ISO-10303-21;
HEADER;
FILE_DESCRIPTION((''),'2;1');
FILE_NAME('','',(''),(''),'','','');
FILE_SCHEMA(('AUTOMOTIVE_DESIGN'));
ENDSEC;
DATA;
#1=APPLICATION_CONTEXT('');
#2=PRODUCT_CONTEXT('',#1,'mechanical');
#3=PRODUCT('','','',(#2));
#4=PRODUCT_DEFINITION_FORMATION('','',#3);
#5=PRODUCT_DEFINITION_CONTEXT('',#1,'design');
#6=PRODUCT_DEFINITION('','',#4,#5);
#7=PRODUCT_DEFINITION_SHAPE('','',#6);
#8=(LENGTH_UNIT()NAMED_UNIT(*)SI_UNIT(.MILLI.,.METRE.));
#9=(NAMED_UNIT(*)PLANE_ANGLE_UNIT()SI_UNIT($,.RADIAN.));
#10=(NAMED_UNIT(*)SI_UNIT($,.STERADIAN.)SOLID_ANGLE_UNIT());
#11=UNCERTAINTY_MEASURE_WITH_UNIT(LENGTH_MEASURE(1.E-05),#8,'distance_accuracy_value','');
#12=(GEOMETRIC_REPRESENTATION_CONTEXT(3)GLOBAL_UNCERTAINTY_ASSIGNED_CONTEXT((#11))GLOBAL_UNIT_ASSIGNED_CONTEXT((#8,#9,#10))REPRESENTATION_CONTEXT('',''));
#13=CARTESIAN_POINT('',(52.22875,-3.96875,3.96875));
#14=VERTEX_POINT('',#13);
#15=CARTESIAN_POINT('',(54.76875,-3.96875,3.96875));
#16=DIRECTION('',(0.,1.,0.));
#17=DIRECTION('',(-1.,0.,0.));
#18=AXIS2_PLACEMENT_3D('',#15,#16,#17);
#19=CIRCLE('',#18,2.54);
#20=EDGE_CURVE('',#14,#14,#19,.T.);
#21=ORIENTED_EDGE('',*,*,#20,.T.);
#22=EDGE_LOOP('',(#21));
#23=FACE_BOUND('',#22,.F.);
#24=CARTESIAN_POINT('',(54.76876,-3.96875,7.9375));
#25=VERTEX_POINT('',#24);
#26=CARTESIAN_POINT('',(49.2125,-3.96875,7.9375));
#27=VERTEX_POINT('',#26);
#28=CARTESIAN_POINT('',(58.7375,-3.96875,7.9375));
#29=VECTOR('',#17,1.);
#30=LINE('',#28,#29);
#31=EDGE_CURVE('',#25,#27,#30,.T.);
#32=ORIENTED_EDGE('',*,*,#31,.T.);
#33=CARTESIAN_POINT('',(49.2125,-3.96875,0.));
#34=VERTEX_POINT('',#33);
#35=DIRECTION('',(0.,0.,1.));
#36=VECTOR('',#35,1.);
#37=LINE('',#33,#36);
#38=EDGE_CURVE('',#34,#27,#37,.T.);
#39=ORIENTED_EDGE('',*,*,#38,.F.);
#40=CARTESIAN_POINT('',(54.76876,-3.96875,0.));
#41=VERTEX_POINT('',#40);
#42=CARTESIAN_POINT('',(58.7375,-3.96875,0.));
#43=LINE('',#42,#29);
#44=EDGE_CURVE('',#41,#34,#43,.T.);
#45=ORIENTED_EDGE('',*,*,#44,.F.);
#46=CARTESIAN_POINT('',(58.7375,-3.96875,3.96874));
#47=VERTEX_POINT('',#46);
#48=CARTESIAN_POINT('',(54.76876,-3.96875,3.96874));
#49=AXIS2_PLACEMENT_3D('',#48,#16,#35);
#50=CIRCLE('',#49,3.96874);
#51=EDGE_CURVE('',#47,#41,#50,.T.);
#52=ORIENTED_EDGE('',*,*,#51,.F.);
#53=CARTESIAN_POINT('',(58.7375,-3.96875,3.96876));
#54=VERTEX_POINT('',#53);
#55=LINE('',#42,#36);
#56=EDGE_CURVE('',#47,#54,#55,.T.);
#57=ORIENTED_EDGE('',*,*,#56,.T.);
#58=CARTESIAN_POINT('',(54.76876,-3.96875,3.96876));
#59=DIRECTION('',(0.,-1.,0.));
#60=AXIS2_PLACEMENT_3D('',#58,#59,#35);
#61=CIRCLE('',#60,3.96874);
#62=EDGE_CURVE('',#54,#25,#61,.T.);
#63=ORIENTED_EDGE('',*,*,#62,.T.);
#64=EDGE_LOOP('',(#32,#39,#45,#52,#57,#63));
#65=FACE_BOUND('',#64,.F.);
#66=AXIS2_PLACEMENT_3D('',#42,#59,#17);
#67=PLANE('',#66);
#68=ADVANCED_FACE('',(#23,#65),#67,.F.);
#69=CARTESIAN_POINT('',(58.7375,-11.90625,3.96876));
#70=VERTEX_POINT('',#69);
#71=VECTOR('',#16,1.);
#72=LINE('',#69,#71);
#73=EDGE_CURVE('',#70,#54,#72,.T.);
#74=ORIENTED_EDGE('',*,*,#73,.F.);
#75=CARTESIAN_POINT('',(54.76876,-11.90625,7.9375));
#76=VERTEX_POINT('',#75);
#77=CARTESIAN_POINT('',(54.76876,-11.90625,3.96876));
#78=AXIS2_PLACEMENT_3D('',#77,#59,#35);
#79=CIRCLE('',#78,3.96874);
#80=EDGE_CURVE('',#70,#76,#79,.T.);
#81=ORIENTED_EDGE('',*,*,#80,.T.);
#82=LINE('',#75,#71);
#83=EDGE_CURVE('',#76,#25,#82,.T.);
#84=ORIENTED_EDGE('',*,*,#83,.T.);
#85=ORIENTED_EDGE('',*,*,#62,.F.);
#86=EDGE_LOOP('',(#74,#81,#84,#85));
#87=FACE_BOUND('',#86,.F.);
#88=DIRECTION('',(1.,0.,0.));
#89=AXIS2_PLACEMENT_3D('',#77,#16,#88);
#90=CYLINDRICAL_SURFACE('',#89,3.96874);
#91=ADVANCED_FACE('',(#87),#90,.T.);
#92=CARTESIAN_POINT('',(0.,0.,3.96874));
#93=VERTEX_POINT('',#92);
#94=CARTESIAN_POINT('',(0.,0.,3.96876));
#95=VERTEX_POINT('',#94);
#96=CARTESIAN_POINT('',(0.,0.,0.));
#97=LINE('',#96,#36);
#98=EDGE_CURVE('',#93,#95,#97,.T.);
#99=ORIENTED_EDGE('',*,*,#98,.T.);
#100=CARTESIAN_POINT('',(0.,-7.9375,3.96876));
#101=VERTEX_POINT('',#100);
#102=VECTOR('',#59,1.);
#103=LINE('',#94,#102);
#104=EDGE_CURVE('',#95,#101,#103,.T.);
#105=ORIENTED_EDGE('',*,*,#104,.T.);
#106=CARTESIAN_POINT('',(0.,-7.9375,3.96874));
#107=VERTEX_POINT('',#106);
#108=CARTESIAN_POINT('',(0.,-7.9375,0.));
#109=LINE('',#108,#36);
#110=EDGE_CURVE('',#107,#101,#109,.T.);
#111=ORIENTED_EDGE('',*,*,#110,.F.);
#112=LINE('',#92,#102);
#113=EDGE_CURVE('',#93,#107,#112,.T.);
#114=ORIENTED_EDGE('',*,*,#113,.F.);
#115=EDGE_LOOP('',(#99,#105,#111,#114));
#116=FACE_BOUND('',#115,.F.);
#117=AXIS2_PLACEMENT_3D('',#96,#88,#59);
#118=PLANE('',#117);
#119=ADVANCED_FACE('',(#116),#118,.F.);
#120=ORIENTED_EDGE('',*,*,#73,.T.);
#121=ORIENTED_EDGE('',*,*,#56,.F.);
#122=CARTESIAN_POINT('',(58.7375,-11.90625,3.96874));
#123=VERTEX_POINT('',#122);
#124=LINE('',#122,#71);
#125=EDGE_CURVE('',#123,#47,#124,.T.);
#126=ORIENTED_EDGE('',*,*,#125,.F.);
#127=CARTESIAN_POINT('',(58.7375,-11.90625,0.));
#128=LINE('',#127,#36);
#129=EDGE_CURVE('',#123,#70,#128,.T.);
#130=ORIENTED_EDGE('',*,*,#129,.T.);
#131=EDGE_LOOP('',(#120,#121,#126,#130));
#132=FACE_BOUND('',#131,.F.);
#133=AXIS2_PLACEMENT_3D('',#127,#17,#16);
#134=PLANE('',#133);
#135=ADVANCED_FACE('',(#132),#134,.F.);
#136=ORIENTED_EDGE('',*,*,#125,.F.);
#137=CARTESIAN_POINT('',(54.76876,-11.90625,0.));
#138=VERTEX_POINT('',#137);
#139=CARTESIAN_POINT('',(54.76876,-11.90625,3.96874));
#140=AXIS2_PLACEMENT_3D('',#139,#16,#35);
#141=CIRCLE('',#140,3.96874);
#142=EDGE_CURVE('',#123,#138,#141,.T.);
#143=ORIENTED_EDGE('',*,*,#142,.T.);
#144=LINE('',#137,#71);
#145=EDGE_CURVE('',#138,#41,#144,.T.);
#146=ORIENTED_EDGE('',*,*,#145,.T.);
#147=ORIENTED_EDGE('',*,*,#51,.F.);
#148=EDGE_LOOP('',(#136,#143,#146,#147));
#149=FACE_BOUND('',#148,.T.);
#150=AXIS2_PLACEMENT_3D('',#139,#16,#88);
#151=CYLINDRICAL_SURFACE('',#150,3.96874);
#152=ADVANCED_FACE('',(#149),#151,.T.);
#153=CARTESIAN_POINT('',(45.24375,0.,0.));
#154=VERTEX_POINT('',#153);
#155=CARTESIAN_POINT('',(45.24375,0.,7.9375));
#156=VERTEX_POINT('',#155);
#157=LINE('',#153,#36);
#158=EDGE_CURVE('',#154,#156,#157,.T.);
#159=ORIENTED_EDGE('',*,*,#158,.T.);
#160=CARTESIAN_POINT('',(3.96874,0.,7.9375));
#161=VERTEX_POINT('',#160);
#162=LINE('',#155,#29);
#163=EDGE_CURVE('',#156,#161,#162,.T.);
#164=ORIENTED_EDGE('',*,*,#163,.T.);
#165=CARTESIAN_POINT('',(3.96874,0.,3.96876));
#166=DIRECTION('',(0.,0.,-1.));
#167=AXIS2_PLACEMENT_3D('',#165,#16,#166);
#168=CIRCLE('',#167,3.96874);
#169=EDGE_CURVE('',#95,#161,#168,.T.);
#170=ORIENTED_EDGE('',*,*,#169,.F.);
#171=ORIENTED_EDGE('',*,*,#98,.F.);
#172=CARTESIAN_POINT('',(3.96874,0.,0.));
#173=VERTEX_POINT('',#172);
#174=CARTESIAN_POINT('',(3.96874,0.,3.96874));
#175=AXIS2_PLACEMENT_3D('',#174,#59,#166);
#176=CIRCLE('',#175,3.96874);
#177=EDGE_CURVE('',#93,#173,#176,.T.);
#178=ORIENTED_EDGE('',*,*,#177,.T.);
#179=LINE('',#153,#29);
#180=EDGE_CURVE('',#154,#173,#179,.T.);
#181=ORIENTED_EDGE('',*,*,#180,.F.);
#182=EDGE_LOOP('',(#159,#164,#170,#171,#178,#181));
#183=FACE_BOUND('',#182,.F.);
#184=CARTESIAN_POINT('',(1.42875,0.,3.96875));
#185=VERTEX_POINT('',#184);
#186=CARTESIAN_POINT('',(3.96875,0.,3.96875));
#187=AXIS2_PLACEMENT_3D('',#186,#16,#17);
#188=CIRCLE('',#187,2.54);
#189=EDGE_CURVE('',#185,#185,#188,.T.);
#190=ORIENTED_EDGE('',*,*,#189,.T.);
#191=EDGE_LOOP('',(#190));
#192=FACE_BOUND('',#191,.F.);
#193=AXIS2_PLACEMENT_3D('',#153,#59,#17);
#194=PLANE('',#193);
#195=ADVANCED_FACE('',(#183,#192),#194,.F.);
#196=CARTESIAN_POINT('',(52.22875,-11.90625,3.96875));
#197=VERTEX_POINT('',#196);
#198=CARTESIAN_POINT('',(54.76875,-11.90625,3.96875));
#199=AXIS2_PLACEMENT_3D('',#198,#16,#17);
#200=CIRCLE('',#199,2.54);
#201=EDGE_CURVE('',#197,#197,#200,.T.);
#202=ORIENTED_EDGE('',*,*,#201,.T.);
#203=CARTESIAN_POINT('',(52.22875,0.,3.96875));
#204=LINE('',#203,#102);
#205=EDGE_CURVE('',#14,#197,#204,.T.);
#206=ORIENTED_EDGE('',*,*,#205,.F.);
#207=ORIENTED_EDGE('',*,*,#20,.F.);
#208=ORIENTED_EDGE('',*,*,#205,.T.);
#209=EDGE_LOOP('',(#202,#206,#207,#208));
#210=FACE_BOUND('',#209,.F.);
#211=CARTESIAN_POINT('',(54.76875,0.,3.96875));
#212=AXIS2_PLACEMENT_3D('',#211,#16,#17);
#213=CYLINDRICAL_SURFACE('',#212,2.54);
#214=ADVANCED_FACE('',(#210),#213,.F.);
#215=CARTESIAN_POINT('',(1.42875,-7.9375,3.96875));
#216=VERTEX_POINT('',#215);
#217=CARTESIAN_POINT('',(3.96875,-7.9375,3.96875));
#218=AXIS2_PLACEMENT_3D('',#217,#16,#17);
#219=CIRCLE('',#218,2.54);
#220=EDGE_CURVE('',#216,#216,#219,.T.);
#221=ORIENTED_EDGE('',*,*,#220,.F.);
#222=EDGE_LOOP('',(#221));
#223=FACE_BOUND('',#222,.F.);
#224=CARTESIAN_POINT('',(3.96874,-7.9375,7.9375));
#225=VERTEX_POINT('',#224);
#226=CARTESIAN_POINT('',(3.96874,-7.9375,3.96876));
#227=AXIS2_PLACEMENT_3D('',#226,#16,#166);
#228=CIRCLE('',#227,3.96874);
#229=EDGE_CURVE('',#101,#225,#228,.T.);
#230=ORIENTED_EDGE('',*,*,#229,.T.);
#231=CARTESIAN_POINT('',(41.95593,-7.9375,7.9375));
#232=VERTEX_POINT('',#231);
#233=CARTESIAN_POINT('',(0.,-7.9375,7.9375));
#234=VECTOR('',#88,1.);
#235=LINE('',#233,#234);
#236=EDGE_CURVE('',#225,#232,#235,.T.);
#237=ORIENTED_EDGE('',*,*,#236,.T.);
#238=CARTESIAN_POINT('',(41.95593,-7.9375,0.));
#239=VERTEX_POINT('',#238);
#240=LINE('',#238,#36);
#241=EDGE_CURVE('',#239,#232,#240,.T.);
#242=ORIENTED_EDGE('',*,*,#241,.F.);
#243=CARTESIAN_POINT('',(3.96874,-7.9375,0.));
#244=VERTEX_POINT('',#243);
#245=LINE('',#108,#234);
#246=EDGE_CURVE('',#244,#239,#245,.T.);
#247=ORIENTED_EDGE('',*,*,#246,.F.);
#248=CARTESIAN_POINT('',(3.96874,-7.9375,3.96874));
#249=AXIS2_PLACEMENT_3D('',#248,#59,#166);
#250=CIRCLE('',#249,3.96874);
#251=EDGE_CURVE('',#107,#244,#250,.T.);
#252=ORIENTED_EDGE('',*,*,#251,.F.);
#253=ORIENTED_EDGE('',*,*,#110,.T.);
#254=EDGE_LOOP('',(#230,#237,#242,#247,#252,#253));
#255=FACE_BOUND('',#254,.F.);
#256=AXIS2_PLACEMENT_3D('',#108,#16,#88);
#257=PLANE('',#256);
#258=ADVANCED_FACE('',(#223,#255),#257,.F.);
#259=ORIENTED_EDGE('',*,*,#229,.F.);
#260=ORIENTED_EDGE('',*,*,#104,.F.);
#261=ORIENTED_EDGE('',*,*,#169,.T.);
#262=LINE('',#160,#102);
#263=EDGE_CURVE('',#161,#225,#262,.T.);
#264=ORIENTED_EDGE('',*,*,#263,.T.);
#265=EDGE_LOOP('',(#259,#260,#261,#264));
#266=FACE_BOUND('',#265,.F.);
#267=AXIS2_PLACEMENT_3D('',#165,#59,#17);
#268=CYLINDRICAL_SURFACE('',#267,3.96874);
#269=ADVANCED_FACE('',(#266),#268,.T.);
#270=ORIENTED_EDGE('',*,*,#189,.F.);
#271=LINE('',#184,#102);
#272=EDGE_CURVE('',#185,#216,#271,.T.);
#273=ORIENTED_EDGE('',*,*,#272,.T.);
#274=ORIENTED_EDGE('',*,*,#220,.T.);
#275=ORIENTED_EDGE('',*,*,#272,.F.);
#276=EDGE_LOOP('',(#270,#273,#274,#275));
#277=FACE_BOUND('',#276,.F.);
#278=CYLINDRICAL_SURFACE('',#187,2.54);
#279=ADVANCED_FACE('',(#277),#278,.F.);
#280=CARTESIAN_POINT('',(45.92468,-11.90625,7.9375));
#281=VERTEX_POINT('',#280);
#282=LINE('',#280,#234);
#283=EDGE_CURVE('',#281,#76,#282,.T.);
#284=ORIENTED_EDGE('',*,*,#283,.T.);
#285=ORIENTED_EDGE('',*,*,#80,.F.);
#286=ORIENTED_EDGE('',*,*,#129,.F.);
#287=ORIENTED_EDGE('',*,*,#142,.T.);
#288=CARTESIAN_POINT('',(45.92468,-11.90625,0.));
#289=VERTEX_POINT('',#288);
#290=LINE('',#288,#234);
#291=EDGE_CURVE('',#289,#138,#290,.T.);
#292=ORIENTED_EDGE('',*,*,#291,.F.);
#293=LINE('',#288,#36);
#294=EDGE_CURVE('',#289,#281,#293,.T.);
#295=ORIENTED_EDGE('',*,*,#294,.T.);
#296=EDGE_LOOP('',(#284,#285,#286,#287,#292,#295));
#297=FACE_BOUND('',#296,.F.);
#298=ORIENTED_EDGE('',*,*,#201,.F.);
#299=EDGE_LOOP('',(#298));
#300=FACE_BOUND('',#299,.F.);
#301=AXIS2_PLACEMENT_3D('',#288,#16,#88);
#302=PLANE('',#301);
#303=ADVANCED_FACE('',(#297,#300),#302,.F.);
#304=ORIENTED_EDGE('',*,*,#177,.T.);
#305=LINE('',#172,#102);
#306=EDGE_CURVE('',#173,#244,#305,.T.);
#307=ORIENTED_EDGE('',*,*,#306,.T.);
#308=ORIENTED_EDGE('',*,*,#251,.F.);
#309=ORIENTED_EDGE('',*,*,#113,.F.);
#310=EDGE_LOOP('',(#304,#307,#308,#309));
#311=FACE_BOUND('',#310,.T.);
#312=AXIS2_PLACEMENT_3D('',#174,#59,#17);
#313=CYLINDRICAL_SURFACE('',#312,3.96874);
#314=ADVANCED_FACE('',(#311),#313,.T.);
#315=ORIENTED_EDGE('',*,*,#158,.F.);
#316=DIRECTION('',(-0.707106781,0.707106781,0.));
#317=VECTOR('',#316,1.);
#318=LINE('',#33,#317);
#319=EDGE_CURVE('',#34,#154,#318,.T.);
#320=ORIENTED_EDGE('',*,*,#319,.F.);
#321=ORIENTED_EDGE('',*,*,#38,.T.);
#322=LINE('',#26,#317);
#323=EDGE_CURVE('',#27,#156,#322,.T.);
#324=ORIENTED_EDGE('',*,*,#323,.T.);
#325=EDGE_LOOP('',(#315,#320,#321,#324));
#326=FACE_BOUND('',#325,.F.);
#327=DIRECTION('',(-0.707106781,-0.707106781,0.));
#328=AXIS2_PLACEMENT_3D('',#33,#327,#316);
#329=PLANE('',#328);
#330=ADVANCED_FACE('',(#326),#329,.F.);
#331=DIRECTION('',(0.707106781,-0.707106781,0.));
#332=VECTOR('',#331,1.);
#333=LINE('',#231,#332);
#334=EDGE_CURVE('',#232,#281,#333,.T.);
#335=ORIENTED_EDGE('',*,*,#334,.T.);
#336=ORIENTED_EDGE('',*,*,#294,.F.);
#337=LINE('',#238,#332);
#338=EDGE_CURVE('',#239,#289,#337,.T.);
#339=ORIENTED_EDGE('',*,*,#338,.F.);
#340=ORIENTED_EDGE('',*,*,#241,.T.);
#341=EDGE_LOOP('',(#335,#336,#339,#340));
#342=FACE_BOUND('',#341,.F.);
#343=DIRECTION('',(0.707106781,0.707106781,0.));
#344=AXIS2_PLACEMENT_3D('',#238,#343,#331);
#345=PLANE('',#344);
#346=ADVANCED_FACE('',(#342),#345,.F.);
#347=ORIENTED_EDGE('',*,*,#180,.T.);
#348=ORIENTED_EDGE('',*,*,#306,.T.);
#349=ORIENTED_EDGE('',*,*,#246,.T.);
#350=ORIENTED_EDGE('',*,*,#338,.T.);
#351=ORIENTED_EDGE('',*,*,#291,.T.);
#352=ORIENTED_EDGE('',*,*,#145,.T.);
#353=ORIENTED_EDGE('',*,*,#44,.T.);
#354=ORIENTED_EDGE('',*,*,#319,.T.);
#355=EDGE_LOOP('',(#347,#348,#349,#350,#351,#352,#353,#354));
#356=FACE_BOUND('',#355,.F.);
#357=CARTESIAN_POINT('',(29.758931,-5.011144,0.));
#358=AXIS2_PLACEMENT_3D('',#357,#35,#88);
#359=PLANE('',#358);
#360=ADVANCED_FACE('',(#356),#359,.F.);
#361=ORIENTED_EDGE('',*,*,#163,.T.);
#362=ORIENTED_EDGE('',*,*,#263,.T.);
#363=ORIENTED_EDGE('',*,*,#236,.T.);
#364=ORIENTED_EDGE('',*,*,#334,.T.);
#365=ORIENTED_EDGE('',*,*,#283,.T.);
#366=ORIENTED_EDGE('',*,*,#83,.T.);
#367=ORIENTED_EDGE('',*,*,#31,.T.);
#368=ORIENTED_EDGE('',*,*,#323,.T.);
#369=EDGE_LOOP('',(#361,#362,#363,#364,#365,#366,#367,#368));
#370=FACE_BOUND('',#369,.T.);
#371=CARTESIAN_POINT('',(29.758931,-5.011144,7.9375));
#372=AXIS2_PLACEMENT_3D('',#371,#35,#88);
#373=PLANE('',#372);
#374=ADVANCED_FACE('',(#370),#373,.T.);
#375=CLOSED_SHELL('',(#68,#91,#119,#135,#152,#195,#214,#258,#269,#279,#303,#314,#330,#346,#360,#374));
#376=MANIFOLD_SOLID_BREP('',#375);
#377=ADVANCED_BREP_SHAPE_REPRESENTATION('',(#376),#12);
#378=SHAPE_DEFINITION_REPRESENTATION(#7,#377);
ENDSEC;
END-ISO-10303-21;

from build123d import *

# Parameters (mm, degrees)
F1_DEPTH = 7.9375
F2_R     = 3.96874
F3_R     = 2.54
F4_DEPTH = 11.90625


# Not quite as in the source:
# - a fillet or chamfer is up to 0.001 mm smaller than in the source, because OpenCascade refuses the exact size


with BuildPart() as f1:
    # F0 (on Top) → F1 (new body)
    with BuildSketch(Plane.XY):
        Polygon((45.24375, 0), (0, 0), (0, -7.9375), (41.9559298487, -7.9375), (45.9246798487, -11.90625), (58.7375, -11.90625), (58.7375, -3.96875), (49.2125, -3.96875), align=None)
    extrude(amount=F1_DEPTH)

    # F2 (radius 3.96875 in the source; OpenCascade refuses exactly that, so slightly less here)
    f2_edges = [f1.edges().sort_by_distance(p)[0] for p in [
        (0, -3.96875, 0),
        (0, -3.96875, 7.9375),
        (58.7375, -7.9375, 0),
        (58.7375, -7.9375, 7.9375),
    ]]
    fillet(f2_edges, radius=F2_R)

    # F3 (on face) → F4 (cut, through all)
    with BuildSketch(Plane(origin=(0, 0, 0), x_dir=(-1, 0, 0), z_dir=(0, 1, 0))):
        with Locations((-3.96875, 3.96875)):
            Circle(F3_R)
        with Locations((-54.76875, 3.96875)):
            Circle(F3_R)
    extrude(amount=-F4_DEPTH, mode=Mode.SUBTRACT)


solid = f1.part
